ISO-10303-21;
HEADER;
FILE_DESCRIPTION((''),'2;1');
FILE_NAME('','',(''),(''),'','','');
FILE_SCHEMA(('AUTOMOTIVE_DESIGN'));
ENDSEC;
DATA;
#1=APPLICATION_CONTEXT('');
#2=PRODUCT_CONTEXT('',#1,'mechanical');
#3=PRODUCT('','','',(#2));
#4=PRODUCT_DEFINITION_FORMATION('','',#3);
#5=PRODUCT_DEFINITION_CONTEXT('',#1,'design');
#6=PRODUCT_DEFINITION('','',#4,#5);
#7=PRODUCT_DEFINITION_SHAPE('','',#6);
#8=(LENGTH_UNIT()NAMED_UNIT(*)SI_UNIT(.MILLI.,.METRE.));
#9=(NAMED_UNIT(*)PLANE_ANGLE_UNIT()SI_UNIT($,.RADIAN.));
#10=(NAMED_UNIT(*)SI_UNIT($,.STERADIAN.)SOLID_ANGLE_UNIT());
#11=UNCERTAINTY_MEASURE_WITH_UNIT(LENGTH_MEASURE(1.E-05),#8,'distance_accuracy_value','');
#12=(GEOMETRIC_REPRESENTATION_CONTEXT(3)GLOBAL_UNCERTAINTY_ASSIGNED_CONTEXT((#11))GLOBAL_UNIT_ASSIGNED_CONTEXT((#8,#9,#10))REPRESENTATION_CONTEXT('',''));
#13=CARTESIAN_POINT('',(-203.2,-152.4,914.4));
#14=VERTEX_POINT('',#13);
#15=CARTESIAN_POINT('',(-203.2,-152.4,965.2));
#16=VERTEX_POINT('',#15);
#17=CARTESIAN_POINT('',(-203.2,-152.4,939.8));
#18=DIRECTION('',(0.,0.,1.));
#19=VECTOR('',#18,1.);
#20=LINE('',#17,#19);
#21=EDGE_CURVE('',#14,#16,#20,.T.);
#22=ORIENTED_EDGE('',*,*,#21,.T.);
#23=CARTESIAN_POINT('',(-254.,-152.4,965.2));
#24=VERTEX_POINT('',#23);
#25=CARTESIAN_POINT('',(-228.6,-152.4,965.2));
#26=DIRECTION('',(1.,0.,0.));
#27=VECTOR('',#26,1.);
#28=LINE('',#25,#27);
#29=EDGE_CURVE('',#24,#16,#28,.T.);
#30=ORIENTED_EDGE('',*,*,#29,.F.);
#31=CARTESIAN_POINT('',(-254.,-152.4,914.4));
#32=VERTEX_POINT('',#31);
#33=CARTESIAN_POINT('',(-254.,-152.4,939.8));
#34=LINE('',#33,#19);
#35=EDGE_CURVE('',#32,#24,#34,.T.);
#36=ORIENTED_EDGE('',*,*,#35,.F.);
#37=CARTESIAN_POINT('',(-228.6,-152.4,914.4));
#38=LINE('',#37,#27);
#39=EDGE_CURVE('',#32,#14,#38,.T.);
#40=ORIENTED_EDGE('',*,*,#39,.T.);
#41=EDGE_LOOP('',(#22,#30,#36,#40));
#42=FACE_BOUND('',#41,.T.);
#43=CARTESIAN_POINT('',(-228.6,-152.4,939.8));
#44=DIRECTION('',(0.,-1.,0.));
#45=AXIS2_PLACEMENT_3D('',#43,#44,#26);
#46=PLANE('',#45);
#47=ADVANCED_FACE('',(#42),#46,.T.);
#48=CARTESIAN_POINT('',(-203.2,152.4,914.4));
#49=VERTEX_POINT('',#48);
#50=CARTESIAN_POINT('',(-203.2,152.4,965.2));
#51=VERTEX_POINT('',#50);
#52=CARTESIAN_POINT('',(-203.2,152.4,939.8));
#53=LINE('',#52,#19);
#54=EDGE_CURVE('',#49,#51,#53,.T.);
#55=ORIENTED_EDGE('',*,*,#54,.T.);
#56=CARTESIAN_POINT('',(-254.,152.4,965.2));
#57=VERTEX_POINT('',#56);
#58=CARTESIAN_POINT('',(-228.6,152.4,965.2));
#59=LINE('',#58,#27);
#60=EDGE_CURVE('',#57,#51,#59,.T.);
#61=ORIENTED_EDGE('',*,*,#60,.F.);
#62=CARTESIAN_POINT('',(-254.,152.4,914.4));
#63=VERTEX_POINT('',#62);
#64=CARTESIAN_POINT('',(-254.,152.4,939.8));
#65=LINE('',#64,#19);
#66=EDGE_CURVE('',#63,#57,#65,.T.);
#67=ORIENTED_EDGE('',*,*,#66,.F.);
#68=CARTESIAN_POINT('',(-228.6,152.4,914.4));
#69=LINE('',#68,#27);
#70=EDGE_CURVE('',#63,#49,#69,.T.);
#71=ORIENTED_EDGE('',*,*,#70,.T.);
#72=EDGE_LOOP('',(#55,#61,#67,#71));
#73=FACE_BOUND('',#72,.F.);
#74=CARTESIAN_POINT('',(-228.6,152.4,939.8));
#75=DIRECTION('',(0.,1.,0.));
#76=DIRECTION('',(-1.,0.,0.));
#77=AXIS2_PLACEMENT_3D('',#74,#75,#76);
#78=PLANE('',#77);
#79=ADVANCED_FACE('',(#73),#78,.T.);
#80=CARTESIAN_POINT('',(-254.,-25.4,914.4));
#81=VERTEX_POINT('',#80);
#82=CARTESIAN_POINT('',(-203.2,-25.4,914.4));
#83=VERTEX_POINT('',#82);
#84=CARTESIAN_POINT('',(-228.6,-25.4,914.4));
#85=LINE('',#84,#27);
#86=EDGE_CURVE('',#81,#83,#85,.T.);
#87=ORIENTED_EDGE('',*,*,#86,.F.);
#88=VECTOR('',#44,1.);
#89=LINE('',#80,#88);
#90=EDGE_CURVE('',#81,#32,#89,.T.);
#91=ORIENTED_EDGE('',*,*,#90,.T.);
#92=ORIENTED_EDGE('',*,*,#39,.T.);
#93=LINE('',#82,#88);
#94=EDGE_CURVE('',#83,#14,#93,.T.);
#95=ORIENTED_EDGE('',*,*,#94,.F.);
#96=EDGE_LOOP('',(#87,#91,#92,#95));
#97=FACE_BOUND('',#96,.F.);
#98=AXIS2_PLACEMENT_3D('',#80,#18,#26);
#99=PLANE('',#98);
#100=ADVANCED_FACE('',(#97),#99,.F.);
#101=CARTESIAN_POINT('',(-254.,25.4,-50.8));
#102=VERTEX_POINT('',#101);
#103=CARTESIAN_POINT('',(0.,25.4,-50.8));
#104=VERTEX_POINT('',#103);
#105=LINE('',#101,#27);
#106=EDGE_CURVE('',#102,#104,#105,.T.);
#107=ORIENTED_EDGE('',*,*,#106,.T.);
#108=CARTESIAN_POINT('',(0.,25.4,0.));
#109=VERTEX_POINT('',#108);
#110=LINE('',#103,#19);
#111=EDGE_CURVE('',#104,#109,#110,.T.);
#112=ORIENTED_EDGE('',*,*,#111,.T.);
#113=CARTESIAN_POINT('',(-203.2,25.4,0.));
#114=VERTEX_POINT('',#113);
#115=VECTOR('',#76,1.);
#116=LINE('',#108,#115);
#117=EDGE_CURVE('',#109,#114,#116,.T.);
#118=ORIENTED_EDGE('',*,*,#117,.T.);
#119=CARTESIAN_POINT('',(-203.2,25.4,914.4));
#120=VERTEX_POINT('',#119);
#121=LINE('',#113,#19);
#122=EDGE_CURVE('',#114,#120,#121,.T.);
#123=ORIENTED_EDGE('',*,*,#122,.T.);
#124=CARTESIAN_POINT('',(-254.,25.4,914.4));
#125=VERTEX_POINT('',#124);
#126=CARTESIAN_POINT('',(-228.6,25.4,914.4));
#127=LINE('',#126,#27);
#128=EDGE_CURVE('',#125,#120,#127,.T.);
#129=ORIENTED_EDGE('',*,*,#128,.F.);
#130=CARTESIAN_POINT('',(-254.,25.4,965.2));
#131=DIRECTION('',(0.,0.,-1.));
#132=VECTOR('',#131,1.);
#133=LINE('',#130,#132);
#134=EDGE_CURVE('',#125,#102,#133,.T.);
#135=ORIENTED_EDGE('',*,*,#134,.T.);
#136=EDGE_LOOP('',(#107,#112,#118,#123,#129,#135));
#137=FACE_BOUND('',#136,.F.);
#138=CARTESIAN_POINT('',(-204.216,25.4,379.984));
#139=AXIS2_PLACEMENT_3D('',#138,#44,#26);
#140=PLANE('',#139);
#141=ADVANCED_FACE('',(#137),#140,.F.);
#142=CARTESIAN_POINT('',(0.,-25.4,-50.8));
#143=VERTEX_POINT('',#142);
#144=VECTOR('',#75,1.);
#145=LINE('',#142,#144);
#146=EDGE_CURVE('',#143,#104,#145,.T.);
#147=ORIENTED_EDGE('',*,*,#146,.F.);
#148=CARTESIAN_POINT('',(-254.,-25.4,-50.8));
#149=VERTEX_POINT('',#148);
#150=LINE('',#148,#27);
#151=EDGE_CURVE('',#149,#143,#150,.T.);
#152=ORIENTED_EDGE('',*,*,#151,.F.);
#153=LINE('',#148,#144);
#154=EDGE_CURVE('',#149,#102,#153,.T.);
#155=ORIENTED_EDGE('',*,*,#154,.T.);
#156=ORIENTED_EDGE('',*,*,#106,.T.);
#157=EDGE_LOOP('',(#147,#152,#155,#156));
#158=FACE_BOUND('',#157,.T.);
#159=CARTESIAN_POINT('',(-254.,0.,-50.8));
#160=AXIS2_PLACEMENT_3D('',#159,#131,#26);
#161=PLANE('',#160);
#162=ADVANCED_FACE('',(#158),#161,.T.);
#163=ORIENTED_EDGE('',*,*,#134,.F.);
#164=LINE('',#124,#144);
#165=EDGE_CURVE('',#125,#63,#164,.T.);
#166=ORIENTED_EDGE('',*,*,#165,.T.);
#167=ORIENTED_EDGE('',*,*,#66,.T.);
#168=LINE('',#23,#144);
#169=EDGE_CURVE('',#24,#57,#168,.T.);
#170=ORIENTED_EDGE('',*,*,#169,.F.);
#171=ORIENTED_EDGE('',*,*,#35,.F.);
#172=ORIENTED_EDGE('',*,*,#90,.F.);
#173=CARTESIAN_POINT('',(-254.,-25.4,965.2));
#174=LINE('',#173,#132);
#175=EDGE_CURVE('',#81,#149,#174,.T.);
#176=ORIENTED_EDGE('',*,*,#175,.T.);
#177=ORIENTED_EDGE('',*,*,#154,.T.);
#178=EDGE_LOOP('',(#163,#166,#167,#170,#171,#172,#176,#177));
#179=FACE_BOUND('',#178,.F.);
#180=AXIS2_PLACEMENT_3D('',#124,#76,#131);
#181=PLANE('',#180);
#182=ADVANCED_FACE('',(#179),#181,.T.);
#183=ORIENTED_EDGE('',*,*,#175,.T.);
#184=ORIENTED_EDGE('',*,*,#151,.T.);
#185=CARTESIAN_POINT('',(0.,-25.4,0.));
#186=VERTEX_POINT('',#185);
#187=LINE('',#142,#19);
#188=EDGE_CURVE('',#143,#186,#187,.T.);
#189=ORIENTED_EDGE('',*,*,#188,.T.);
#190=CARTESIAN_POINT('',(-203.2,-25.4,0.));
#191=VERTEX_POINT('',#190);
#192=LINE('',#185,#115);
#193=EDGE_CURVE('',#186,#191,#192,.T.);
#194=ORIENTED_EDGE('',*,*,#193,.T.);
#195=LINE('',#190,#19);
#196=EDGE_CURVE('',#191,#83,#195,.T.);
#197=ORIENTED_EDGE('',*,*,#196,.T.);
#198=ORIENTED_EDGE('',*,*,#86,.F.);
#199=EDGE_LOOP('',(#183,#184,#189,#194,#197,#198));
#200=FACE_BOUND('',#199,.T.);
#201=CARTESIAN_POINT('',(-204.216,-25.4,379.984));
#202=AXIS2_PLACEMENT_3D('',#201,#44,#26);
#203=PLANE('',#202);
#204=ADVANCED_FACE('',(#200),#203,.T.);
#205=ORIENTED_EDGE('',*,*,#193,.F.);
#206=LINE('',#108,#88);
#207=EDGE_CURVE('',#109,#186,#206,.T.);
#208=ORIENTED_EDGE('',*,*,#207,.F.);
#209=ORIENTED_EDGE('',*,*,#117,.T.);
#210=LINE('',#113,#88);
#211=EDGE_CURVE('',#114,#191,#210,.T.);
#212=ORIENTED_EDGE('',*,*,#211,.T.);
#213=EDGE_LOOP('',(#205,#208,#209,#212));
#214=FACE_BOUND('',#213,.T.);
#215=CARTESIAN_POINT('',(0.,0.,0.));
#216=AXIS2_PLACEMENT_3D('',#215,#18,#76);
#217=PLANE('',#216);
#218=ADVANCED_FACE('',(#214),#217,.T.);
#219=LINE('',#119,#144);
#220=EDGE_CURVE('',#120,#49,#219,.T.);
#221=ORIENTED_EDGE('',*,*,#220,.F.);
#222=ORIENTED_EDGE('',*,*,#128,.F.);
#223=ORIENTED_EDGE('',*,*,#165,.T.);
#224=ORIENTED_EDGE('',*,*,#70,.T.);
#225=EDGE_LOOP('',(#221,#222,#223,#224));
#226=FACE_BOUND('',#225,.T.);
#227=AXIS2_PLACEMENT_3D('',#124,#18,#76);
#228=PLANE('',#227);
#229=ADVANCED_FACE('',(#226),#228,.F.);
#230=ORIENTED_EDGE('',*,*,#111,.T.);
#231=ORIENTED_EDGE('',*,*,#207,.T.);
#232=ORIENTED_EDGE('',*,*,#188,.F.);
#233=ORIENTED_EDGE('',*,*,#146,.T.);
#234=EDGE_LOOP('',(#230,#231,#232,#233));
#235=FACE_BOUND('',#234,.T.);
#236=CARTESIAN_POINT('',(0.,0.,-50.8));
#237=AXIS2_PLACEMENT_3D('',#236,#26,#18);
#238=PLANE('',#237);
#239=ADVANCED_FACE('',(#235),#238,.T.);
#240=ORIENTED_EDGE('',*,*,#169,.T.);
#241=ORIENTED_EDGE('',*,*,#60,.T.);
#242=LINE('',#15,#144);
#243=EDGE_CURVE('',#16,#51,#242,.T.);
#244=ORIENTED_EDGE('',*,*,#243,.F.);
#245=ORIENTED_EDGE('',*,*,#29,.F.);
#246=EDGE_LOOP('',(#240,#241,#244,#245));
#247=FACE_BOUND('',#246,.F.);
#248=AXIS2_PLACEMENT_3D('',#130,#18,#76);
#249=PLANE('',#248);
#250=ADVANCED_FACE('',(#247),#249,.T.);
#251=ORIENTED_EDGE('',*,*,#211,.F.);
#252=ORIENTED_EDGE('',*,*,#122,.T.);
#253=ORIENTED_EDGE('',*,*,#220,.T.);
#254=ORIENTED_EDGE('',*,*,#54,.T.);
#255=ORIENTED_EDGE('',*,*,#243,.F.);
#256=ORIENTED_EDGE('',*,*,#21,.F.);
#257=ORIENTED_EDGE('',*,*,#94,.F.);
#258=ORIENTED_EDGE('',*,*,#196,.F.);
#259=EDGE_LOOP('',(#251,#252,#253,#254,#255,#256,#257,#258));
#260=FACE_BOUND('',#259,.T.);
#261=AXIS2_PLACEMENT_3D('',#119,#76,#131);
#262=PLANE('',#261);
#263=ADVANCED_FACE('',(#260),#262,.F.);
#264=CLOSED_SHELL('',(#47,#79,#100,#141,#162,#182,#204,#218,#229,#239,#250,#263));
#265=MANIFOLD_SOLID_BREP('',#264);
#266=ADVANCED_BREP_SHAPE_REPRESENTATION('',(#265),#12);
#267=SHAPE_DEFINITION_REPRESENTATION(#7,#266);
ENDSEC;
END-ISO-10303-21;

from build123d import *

# Parameters (mm, degrees)
F1_DEPTH = 25.4
F2_W     = 50.8
F2_H     = 50.8
F3_DEPTH = 127


# Not quite as in the source:
# - a feature of the source that left no trace in its solid (it failed there, or was rolled back) is left out
# - the program builds the solid bodies; features that only make, move or delete a surface that nothing else refers to are left out


with BuildPart() as f1:
    # F0 (on Front) → F1 (new body, symmetric)
    with BuildSketch(Plane.XZ):
        Polygon((0, -50.8), (0, 0), (-203.2, 0), (-203.2, 965.2), (-254, 965.2), (-254, -50.8), align=None)
    extrude(amount=F1_DEPTH, both=True)

    # F2 (on face) → F3 (join)
    with BuildSketch(Plane.XZ.offset(25.4)):
        with Locations((-228.6, 939.8)):
            Rectangle(F2_W, F2_H)
    extrude(amount=F3_DEPTH)

    # F4: F1 across plane


with BuildPart() as f1_1:
    add(f1.part)
    add(f1.part.mirror(Plane.XZ))


solid = f1_1.part
